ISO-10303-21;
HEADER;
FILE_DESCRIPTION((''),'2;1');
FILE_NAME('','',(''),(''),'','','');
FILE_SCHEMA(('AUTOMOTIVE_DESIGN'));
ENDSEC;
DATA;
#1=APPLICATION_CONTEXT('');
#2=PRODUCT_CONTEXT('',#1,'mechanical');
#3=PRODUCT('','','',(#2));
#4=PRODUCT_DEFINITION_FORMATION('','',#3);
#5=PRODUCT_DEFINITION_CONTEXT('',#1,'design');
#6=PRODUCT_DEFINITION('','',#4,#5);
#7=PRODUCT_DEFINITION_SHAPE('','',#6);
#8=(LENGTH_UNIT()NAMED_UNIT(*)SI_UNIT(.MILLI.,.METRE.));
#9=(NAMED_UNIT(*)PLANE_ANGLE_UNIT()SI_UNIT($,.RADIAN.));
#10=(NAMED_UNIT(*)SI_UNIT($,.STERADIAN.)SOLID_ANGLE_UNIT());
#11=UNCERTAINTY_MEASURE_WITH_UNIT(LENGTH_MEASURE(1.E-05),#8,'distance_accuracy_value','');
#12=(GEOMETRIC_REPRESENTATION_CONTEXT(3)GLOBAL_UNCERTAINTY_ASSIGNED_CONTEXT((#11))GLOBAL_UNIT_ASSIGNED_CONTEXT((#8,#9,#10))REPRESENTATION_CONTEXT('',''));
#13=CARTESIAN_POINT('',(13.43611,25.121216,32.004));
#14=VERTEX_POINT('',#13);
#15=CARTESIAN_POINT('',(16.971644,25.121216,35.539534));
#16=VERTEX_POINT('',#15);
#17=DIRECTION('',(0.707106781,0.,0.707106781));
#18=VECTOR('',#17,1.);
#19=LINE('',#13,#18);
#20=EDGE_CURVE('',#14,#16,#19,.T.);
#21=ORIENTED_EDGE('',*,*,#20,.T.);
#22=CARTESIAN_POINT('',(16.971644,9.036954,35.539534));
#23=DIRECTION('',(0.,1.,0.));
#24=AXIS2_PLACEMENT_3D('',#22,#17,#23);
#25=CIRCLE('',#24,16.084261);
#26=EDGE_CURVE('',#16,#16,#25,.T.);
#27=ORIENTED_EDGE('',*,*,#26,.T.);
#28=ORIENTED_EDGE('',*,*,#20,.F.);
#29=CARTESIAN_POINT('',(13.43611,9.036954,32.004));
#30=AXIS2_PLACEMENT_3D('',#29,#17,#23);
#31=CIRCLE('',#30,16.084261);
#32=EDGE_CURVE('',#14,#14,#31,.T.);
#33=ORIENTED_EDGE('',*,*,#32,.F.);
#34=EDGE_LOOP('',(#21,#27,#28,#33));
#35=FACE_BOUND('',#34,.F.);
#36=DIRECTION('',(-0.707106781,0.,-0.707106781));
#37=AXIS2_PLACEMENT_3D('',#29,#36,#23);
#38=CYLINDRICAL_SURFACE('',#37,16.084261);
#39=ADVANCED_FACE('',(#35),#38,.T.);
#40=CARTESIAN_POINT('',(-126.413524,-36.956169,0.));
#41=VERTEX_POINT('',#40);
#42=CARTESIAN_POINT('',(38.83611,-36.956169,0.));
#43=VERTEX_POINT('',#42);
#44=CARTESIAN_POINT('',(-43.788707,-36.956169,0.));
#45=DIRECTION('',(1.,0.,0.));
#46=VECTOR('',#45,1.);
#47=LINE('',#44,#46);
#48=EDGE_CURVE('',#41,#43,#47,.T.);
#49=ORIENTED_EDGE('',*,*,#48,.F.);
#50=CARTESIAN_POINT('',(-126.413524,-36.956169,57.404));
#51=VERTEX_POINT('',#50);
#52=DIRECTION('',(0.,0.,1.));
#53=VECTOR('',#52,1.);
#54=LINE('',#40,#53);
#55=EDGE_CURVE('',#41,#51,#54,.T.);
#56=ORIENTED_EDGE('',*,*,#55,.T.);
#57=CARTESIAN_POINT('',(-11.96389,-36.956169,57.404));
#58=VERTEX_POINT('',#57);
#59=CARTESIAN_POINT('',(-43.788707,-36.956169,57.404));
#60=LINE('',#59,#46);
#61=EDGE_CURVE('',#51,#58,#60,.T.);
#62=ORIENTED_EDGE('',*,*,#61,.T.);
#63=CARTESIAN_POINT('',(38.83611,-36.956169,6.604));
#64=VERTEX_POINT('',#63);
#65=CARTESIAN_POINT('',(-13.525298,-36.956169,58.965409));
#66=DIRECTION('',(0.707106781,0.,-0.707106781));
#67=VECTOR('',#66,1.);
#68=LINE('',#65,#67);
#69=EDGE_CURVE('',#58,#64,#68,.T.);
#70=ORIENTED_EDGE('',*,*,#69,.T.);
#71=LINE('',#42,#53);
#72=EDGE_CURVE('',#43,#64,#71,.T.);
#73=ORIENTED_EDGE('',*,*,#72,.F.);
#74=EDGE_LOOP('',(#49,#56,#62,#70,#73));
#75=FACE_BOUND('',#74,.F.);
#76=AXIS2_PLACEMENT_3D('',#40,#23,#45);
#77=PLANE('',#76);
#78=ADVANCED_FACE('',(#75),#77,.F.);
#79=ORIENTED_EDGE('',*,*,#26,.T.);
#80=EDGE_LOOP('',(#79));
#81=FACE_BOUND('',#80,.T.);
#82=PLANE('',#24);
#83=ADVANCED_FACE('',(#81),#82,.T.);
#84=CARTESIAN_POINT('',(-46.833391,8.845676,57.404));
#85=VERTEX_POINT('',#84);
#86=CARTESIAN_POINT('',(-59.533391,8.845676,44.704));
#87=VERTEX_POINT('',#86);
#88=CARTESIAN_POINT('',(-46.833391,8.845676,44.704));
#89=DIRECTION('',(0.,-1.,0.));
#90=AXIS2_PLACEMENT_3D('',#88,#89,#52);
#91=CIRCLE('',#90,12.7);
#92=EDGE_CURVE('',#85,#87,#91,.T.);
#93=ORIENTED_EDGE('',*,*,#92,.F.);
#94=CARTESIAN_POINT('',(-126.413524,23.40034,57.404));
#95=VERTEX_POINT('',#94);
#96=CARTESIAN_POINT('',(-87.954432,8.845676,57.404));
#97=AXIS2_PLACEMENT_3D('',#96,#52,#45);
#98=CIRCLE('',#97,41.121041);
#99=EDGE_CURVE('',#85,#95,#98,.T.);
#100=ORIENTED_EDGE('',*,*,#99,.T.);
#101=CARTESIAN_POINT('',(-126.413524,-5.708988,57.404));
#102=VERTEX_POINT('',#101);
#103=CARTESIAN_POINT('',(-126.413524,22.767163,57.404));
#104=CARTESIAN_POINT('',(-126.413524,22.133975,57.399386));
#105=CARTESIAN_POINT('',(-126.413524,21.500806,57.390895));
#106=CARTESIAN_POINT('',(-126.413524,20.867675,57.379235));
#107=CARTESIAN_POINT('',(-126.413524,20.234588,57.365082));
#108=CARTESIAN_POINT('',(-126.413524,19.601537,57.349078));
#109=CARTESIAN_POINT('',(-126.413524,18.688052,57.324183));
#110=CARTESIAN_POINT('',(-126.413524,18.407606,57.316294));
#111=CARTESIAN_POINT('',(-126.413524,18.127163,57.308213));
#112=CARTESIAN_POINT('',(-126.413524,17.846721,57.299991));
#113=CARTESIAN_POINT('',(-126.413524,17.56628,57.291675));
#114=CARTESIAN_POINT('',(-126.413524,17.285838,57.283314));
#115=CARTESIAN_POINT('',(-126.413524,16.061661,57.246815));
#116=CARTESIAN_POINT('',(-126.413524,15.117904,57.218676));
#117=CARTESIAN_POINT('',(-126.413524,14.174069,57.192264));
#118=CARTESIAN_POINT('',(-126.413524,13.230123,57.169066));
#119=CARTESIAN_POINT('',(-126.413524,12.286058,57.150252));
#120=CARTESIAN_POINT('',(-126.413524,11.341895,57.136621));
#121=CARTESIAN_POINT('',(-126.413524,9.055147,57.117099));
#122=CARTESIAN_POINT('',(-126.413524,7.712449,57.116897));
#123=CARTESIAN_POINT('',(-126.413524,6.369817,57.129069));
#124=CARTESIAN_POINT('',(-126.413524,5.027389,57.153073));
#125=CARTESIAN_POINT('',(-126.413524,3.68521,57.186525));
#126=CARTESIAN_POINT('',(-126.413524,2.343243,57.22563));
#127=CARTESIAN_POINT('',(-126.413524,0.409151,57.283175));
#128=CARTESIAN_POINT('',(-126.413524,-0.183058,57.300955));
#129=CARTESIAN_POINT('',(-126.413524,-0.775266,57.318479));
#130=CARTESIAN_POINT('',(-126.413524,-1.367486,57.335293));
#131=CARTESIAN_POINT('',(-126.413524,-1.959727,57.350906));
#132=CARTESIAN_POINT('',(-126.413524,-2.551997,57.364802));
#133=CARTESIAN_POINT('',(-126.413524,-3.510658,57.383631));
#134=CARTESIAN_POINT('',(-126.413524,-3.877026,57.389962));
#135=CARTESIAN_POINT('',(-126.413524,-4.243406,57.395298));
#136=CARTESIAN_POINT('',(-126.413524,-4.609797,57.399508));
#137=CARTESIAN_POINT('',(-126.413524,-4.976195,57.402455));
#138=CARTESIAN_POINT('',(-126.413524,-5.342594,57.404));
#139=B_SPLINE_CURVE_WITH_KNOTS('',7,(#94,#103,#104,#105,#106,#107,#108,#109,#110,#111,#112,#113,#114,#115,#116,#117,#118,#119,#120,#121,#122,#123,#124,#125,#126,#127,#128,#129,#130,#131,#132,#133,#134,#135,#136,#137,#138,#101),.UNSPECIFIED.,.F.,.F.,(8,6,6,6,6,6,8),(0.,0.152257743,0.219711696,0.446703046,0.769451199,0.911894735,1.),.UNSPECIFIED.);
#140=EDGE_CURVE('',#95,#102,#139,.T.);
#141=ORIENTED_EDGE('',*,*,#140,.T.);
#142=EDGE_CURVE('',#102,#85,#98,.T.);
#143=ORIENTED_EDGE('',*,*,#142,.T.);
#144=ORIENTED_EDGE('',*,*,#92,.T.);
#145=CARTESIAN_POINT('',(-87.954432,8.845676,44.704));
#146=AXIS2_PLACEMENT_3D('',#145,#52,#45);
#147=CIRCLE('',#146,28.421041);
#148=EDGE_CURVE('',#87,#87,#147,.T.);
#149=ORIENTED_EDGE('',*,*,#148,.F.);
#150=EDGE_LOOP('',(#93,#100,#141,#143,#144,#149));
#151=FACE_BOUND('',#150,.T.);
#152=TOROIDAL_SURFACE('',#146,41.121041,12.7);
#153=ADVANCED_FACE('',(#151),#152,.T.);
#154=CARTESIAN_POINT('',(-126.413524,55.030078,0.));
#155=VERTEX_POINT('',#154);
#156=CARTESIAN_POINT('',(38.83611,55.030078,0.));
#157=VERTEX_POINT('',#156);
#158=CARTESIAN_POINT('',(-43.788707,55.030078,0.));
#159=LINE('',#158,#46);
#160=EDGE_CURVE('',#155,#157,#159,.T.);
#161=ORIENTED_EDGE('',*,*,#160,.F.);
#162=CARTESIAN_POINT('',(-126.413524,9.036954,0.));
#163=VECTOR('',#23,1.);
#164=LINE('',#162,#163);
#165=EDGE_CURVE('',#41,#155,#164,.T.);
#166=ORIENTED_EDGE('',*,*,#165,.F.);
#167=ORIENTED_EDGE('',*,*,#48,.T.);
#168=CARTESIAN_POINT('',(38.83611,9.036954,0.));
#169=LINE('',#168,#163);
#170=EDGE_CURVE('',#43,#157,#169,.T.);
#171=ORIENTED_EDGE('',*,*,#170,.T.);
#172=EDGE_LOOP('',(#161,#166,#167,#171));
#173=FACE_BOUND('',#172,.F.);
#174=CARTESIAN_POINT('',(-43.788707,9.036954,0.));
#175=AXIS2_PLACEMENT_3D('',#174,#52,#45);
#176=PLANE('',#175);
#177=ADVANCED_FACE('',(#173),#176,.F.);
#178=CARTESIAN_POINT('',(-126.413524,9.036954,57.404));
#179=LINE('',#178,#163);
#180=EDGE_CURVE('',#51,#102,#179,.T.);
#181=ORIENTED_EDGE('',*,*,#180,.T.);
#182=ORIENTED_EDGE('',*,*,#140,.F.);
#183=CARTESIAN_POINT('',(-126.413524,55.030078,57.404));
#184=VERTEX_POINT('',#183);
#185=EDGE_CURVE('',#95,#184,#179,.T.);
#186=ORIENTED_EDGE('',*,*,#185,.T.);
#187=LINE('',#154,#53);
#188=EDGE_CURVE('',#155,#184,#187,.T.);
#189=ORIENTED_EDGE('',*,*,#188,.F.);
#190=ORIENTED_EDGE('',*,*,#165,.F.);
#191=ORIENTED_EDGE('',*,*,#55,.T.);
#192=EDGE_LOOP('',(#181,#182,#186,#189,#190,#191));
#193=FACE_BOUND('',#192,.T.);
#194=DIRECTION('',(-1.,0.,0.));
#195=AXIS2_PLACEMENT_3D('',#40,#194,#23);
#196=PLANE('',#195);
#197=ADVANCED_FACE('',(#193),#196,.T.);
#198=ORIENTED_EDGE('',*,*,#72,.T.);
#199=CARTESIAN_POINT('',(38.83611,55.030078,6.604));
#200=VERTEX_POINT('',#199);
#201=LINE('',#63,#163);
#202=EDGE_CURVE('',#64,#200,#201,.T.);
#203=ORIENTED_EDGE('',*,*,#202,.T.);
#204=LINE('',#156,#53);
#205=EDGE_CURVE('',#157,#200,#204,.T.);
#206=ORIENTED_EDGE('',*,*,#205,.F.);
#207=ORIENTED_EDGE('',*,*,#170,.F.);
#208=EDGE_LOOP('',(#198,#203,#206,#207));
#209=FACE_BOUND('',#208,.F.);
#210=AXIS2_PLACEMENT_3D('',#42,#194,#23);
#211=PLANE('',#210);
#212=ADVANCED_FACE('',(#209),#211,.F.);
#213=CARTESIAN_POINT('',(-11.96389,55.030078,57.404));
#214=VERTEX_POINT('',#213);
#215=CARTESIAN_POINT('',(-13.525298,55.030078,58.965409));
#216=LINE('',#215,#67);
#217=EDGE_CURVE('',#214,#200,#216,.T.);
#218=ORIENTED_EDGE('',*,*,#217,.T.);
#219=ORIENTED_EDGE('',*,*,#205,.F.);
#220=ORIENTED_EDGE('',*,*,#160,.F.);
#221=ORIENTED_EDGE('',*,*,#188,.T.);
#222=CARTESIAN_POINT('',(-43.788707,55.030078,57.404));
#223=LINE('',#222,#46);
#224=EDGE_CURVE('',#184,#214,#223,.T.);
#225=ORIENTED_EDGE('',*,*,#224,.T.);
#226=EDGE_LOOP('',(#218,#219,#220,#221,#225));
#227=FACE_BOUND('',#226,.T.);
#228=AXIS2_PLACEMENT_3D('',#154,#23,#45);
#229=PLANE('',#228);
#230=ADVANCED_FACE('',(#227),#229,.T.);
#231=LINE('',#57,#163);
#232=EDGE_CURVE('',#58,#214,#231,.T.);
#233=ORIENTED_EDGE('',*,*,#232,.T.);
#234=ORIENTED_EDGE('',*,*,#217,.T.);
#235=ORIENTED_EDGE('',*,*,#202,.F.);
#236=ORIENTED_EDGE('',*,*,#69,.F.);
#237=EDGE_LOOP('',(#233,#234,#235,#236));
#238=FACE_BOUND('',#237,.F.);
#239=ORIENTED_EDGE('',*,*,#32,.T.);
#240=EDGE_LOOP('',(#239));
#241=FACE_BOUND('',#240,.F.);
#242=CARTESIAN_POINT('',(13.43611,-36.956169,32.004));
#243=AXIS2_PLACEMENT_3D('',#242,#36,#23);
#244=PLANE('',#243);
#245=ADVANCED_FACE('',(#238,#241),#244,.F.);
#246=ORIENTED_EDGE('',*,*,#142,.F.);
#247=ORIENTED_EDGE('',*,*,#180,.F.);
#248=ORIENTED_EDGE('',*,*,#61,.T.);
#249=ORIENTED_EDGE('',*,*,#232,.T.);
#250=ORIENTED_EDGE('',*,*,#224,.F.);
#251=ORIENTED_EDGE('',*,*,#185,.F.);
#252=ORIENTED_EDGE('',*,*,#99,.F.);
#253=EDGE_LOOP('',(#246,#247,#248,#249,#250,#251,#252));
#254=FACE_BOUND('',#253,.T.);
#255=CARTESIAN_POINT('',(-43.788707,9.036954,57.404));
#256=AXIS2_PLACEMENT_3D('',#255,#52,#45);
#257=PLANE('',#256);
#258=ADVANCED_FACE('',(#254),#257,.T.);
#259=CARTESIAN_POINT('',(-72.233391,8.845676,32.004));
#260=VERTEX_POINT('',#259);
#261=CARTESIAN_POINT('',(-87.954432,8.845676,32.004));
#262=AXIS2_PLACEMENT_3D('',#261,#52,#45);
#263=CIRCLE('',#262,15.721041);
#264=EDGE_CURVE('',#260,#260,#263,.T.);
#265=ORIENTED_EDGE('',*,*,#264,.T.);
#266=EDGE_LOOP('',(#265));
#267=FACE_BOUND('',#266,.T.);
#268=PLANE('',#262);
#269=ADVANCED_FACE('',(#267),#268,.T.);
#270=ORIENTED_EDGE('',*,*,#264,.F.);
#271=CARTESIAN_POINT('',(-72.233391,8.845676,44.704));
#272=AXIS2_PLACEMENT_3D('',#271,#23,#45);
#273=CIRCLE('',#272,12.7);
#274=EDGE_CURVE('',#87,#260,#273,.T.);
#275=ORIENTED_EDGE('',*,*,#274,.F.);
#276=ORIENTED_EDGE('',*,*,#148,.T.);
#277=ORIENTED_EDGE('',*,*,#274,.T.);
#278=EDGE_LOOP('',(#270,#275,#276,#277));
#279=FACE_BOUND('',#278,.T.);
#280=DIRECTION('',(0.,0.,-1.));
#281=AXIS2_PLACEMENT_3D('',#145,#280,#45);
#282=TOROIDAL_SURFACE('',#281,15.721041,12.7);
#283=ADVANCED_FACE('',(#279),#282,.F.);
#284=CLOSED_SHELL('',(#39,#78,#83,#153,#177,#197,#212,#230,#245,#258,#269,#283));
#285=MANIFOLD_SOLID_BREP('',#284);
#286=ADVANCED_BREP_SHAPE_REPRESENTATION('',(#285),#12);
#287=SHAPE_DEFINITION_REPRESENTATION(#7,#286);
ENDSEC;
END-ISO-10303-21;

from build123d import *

# Parameters (mm, degrees)
F0_W     = 165.2496345341
F0_H     = 91.986246407
F1_DEPTH = 57.404
F2_R     = 28.4210411612
F3_DEPTH = 25.4
F5_SIZE  = 50.8
F6_R     = 16.0842611484
F7_DEPTH = 5


# Not quite as in the source:
# - a fillet or chamfer that OpenCascade refuses, or shapes differently, is made with other operations: its cross-section is extruded or revolved along the edge and cut away or added


with BuildPart() as f1:
    # F0 (on Top) → F1 (new body)
    with BuildSketch(Plane.XY):
        with Locations((-43.7887068838, 9.0369544923)):
            Rectangle(F0_W, F0_H)
    extrude(amount=F1_DEPTH)

    # F2 (on face) → F3 (cut)
    with BuildSketch(Plane.XY.offset(57.404)):
        with Locations((-87.9544317722, 8.8456757367)):
            Circle(F2_R)
    extrude(amount=-F3_DEPTH, mode=Mode.SUBTRACT)

    # F4: fillet of radius 12.7 on 2 edges, made by hand

    # F4_s1 → F4_t2 (revolve)
    with BuildSketch(Plane.XZ.offset(-8.8456757367)):
        with BuildLine():
            ThreePointArc((-59.5333906111, 44.704), (-63.25313449, 35.7237438789), (-72.2333906111, 32.004))
            Line((-72.2333906111, 32.004), (-59.5333906111, 32.004))
            Line((-59.5333906111, 32.004), (-59.5333906111, 44.704))
        make_face()
    revolve(axis=Axis((-87.9544317722, 8.8456757367, 32.004), (0, 0, 1)))

    # F4_s3 → F4_t4 (revolve, cut)
    with BuildSketch(Plane.XZ.offset(-8.8456757367)):
        with BuildLine():
            ThreePointArc((-46.8333906111, 57.404), (-55.8136467322, 53.6842561211), (-59.5333906111, 44.704))
            Line((-59.5333906111, 44.704), (-59.5333906111, 57.404))
            Line((-59.5333906111, 57.404), (-46.8333906111, 57.404))
        make_face()
    revolve(axis=Axis((-87.9544317722, 8.8456757367, 57.404), (0, 0, 1)), mode=Mode.SUBTRACT)

    # F5
    f5_edges = [f1.edges().sort_by_distance(p)[0] for p in [
        (38.83611, 9.036954, 57.404),
    ]]
    chamfer(f5_edges, length=F5_SIZE)

    # F6 (on face) → F7 (join)
    with BuildSketch(Plane(origin=(22.7200551916, 0, 22.7200551916), x_dir=(0, 1, 0), z_dir=(0.7071067812, 0, 0.7071067812))):
        with Locations((9.0369544923, 13.1294806603)):
            Circle(F6_R)
    extrude(amount=F7_DEPTH)


solid = f1.part
